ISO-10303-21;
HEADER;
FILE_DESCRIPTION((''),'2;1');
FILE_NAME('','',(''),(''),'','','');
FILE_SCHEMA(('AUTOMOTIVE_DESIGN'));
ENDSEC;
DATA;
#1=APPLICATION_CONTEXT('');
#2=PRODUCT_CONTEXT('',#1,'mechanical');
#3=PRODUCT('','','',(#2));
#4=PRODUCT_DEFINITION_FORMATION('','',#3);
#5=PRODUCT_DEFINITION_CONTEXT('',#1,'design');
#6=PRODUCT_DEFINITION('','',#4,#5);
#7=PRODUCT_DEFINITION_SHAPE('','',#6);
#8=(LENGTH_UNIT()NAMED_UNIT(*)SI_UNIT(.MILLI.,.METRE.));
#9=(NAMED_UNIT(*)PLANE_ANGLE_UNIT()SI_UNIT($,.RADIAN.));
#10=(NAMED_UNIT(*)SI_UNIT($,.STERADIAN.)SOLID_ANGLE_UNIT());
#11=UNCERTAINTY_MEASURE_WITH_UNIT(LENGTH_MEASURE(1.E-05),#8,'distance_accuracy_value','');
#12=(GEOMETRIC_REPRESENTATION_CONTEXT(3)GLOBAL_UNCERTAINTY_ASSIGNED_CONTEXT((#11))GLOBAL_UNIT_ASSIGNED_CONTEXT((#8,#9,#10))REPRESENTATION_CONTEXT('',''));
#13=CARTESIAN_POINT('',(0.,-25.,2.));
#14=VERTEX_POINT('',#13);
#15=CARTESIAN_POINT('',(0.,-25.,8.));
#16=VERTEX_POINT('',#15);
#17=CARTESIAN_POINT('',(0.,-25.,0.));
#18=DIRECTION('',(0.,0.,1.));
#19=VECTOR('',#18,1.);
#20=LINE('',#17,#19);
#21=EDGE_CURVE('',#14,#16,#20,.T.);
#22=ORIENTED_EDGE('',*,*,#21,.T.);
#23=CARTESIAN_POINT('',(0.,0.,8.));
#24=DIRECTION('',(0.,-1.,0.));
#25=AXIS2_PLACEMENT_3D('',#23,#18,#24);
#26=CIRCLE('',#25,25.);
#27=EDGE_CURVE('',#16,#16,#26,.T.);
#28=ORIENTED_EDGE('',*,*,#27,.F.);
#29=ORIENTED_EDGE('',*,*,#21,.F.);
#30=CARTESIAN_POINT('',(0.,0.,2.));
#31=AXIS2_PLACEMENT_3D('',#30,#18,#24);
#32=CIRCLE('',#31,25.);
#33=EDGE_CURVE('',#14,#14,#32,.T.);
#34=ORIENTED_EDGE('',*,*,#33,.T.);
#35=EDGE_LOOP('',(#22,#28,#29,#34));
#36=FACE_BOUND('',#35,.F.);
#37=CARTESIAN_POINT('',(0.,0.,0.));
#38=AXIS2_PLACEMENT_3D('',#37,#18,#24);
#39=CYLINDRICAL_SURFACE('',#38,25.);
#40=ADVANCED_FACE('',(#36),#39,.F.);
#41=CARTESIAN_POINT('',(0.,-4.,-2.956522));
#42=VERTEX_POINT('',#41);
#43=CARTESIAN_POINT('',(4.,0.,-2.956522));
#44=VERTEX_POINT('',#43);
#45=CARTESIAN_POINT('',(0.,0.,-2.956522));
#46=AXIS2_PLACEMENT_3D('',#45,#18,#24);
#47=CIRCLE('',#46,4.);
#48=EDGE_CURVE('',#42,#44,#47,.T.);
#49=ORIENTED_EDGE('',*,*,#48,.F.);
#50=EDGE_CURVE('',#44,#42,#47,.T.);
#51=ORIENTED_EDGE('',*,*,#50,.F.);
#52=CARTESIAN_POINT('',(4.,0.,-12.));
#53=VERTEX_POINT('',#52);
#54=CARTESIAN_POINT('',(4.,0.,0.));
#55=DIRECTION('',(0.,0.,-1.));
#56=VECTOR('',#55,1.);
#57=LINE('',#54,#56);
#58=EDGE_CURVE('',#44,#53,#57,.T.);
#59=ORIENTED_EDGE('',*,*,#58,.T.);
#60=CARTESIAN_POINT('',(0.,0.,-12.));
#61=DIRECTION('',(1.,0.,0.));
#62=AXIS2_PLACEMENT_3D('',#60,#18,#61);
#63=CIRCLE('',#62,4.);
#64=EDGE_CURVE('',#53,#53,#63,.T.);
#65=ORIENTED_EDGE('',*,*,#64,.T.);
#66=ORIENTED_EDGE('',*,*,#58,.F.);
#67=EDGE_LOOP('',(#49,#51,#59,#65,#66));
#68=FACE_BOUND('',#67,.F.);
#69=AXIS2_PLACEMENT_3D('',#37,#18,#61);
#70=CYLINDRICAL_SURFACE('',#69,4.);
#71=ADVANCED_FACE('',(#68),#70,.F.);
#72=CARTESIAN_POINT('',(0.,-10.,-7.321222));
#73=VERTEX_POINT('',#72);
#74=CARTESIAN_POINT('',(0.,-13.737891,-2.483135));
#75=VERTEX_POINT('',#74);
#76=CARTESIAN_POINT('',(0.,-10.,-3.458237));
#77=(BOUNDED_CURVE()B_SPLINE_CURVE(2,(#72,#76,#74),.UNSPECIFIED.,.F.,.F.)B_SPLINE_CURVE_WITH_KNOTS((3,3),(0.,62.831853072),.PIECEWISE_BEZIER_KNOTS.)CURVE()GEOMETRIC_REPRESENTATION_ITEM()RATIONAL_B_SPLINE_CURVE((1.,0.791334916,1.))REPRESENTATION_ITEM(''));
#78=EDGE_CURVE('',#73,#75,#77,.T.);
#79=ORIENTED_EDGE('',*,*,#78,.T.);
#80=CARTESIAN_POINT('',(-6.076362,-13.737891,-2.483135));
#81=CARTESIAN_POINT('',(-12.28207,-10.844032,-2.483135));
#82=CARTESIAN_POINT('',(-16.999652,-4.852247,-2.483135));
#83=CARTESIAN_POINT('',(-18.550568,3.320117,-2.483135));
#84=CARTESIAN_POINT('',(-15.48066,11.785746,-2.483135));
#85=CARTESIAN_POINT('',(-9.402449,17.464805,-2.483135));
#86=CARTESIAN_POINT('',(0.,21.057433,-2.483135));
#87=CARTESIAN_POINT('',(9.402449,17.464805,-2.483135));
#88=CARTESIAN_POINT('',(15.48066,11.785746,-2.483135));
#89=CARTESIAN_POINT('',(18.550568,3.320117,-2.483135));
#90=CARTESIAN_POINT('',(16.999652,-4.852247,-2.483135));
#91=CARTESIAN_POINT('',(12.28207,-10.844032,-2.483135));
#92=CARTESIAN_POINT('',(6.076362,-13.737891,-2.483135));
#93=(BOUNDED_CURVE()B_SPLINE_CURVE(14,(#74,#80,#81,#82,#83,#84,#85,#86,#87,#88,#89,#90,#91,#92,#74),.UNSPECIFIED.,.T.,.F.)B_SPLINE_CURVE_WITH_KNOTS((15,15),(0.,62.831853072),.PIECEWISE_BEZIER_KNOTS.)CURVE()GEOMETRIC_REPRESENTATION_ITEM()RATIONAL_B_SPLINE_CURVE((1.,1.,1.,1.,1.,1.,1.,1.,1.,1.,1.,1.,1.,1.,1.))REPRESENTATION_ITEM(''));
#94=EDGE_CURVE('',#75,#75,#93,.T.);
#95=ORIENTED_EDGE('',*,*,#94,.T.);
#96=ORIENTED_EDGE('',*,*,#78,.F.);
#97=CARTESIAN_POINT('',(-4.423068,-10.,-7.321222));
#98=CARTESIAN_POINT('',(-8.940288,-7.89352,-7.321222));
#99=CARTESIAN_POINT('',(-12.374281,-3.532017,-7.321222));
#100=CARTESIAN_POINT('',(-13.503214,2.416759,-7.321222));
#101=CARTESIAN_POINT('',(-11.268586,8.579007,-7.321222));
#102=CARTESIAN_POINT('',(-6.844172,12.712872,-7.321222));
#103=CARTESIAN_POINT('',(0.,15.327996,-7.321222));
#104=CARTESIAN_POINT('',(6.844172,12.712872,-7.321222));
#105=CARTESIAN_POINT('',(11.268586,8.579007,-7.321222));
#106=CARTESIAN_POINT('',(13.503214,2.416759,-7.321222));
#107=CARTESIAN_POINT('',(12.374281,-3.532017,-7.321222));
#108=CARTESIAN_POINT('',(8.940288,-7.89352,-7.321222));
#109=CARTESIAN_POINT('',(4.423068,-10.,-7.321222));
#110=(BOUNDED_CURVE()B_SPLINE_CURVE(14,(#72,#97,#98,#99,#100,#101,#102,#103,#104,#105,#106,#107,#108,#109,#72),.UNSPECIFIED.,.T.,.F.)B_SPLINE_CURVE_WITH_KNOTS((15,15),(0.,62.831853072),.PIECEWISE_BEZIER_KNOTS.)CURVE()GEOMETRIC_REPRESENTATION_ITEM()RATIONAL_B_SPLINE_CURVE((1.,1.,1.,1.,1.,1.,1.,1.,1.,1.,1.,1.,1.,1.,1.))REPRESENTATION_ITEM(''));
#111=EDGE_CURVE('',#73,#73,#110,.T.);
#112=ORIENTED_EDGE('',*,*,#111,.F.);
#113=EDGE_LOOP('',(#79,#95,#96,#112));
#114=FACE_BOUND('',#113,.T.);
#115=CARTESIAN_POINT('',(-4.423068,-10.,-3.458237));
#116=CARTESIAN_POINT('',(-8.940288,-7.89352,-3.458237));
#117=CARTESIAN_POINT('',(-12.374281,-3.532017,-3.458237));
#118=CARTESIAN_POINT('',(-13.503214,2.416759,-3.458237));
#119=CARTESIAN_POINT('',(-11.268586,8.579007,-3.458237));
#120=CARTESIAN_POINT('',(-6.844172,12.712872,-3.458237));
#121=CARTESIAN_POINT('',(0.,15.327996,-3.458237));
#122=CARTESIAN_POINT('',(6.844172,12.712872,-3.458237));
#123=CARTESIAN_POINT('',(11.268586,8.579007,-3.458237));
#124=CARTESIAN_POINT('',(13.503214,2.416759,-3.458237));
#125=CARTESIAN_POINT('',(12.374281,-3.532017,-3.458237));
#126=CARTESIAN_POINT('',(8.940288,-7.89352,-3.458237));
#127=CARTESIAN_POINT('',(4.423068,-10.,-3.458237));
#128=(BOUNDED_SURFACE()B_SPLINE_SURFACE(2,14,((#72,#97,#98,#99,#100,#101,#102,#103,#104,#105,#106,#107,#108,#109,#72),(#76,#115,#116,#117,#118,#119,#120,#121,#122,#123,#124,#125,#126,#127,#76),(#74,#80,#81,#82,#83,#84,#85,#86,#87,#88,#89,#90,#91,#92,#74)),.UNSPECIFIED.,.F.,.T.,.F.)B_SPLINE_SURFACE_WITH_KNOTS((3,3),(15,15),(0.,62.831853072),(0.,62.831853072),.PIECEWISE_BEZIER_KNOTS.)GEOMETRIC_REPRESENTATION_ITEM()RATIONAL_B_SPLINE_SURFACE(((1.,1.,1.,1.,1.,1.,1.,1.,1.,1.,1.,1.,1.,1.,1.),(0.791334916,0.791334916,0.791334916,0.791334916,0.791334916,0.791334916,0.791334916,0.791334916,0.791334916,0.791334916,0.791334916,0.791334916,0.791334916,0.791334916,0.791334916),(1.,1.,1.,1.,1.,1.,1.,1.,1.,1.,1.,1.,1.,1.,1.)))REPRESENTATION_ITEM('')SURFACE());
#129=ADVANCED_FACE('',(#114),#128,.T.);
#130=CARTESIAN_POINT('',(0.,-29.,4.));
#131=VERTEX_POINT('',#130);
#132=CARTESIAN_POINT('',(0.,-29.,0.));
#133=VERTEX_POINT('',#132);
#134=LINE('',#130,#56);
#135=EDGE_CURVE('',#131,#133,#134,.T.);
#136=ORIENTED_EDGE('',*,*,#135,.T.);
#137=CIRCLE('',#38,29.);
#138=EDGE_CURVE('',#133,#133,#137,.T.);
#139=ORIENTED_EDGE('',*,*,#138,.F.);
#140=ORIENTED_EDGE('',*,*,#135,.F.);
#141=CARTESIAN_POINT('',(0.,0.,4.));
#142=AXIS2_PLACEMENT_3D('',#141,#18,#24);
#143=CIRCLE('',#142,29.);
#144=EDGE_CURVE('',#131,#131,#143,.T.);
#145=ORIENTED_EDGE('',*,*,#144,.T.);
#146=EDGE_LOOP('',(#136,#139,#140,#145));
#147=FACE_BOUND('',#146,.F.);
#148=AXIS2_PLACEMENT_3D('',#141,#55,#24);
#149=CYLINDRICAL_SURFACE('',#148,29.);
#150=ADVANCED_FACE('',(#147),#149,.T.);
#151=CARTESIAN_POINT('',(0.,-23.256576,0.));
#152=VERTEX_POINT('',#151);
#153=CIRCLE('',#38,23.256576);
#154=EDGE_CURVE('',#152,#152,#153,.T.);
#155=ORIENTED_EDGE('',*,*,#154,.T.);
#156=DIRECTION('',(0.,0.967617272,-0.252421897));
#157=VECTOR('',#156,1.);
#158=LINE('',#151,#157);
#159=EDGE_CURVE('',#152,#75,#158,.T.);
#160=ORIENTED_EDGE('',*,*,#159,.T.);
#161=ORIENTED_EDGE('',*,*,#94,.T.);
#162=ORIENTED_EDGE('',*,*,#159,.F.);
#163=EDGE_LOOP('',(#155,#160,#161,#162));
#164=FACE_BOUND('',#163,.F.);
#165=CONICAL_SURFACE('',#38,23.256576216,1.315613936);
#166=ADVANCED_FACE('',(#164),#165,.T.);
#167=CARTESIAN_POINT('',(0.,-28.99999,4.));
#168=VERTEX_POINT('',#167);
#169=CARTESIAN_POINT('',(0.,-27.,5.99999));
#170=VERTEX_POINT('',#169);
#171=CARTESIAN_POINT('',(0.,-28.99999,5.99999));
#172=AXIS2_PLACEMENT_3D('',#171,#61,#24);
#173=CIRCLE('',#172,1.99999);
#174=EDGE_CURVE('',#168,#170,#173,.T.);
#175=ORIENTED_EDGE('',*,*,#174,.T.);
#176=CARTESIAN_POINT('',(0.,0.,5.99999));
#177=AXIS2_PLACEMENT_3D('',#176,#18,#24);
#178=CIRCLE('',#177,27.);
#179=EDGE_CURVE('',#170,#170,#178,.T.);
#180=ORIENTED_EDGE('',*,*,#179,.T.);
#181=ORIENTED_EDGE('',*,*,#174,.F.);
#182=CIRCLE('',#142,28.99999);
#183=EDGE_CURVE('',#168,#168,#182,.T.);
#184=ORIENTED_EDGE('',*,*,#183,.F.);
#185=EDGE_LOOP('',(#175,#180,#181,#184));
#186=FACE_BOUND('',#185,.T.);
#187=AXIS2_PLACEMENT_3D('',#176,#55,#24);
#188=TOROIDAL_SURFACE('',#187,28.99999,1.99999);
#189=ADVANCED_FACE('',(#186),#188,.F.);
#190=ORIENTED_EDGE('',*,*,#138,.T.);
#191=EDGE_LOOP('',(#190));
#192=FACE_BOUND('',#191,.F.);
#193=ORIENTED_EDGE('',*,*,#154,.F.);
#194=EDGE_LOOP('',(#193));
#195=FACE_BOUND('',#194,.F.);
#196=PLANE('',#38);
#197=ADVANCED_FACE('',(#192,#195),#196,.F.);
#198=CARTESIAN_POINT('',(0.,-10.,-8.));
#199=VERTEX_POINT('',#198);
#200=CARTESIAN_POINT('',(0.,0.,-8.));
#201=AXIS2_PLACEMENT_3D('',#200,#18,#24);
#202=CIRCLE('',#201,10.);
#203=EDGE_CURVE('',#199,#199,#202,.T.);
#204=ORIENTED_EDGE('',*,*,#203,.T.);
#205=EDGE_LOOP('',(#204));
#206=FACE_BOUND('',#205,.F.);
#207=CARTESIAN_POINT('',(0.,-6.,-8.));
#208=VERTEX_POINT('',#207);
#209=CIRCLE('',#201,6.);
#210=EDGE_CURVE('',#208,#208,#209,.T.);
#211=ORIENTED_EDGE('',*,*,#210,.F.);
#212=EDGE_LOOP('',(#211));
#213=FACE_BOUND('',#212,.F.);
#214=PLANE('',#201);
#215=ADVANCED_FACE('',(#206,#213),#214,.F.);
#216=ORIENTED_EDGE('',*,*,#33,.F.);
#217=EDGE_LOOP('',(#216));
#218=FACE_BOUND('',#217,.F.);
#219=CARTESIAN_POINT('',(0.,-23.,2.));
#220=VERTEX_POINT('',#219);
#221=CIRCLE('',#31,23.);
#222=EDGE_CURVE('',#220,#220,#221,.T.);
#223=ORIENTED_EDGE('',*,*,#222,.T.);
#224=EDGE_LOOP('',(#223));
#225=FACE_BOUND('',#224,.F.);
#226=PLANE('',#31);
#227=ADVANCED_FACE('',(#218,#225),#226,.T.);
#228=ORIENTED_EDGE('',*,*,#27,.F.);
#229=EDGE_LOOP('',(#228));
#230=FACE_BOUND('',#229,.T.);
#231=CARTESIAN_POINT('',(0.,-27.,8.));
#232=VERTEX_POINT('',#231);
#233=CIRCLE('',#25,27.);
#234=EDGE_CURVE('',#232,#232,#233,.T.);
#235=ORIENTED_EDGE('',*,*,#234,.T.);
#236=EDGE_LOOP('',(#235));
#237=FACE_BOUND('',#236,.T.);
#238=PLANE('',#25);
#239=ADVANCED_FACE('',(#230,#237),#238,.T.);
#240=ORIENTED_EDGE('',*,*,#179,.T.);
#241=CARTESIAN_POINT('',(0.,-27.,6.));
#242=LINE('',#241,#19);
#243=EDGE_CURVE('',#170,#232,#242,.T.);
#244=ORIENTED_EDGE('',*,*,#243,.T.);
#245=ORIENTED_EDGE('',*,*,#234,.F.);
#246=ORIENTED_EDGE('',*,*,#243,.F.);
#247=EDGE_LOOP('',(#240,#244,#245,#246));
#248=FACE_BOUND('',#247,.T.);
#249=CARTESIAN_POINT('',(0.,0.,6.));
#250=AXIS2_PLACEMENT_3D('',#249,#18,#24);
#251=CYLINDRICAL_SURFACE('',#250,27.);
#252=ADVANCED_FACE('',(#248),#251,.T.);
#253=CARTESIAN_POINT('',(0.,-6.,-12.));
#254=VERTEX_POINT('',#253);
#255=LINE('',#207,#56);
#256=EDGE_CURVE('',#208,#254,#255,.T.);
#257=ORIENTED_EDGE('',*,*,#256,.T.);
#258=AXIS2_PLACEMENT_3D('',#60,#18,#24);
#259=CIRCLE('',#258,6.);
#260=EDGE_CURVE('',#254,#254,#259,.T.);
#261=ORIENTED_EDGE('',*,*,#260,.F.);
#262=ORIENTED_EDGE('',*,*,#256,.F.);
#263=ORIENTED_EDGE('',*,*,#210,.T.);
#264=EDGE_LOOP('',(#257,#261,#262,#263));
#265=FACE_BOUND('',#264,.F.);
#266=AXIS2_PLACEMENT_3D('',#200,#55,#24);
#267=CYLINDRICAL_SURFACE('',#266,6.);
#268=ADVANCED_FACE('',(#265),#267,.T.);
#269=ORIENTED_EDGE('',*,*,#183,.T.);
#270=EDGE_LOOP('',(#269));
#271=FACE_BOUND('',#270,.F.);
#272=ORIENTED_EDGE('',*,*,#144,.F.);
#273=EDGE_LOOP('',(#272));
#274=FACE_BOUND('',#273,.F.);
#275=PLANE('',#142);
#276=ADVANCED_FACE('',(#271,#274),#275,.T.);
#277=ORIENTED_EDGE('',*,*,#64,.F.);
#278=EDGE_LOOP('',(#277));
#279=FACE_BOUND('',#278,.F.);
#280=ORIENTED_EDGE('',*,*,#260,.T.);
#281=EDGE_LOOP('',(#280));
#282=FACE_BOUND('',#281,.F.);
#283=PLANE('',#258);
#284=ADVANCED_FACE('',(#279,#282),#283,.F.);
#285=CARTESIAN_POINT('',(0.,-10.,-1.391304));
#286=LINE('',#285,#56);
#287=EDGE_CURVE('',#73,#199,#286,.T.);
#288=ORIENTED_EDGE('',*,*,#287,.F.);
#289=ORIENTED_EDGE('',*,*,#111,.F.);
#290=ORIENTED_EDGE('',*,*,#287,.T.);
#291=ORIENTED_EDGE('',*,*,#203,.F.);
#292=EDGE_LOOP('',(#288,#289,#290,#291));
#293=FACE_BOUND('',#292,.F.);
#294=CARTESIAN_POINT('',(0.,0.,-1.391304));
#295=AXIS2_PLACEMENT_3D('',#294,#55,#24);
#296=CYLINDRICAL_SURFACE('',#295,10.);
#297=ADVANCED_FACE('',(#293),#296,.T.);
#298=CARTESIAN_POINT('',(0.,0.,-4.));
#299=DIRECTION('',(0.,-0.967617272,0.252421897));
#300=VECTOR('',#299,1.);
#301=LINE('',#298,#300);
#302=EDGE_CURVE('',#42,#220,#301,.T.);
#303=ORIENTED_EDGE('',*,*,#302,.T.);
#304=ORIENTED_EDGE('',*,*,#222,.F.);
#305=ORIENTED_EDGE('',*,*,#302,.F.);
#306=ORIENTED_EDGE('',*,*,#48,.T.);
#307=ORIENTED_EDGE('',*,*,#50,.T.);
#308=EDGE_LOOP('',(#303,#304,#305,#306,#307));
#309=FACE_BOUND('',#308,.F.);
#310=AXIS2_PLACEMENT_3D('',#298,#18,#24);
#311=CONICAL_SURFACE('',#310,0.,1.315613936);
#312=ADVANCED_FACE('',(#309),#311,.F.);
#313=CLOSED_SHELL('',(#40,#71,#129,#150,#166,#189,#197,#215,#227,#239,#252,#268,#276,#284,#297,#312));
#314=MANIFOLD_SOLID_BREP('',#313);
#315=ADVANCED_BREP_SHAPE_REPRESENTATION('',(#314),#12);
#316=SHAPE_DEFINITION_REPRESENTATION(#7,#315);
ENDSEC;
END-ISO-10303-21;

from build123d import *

# Parameters (mm, degrees)
F0_W     = 2
F0_H     = 4
F4_R     = 5
F5_R     = 4
F6_DEPTH = 25
F7_R     = 1.99999


# Not quite as in the source:
# - a fillet or chamfer is up to 0.001 mm smaller than in the source, because OpenCascade refuses the exact size
# - a feature names something its author has since deleted; it is built from what else it names


with BuildPart() as f1:
    # F0 (on Right) → F1 (revolve)
    with BuildSketch(Plane.YZ):
        with Locations((-26, 6)):
            Rectangle(F0_W, F0_H)
        Polygon((-29, 0), (-25, 0), (-25, 2), (-25, 4), (-27, 4), (-29, 4), align=None)
        Polygon((-25, 2), (-25, 0), (-23.256576216, 0), (0, -6.0669329259), (0, -4), (-23, 2), align=None)
    revolve(axis=Axis((0, 0, 1), (0, 0, 1)))

    # F2 (on Right) → F3 (revolve)
    with BuildSketch(Plane.YZ):
        Polygon((-10, -8), (-6, -8), (-6, -12), (0, -12), (0, -4), (-10, -1.3913043478), align=None)
    revolve(axis=Axis((0, 0, -8), (0, 0, 1)))

    # F4
    f4_edges = [f1.edges().sort_by_distance(p)[0] for p in [
        (0, 10, -3.458237),
    ]]
    fillet(f4_edges, radius=F4_R)

    # F5 (on Top) → F6 (cut)
    with BuildSketch(Plane.XY):
        Circle(F5_R)
    extrude(amount=-F6_DEPTH, mode=Mode.SUBTRACT)

    # F7 (radius 2 in the source; OpenCascade refuses exactly that, so slightly less here)
    f7_edges = [f1.edges().sort_by_distance(p)[0] for p in [
        (0, 27, 4),
    ]]
    fillet(f7_edges, radius=F7_R)


solid = f1.part
